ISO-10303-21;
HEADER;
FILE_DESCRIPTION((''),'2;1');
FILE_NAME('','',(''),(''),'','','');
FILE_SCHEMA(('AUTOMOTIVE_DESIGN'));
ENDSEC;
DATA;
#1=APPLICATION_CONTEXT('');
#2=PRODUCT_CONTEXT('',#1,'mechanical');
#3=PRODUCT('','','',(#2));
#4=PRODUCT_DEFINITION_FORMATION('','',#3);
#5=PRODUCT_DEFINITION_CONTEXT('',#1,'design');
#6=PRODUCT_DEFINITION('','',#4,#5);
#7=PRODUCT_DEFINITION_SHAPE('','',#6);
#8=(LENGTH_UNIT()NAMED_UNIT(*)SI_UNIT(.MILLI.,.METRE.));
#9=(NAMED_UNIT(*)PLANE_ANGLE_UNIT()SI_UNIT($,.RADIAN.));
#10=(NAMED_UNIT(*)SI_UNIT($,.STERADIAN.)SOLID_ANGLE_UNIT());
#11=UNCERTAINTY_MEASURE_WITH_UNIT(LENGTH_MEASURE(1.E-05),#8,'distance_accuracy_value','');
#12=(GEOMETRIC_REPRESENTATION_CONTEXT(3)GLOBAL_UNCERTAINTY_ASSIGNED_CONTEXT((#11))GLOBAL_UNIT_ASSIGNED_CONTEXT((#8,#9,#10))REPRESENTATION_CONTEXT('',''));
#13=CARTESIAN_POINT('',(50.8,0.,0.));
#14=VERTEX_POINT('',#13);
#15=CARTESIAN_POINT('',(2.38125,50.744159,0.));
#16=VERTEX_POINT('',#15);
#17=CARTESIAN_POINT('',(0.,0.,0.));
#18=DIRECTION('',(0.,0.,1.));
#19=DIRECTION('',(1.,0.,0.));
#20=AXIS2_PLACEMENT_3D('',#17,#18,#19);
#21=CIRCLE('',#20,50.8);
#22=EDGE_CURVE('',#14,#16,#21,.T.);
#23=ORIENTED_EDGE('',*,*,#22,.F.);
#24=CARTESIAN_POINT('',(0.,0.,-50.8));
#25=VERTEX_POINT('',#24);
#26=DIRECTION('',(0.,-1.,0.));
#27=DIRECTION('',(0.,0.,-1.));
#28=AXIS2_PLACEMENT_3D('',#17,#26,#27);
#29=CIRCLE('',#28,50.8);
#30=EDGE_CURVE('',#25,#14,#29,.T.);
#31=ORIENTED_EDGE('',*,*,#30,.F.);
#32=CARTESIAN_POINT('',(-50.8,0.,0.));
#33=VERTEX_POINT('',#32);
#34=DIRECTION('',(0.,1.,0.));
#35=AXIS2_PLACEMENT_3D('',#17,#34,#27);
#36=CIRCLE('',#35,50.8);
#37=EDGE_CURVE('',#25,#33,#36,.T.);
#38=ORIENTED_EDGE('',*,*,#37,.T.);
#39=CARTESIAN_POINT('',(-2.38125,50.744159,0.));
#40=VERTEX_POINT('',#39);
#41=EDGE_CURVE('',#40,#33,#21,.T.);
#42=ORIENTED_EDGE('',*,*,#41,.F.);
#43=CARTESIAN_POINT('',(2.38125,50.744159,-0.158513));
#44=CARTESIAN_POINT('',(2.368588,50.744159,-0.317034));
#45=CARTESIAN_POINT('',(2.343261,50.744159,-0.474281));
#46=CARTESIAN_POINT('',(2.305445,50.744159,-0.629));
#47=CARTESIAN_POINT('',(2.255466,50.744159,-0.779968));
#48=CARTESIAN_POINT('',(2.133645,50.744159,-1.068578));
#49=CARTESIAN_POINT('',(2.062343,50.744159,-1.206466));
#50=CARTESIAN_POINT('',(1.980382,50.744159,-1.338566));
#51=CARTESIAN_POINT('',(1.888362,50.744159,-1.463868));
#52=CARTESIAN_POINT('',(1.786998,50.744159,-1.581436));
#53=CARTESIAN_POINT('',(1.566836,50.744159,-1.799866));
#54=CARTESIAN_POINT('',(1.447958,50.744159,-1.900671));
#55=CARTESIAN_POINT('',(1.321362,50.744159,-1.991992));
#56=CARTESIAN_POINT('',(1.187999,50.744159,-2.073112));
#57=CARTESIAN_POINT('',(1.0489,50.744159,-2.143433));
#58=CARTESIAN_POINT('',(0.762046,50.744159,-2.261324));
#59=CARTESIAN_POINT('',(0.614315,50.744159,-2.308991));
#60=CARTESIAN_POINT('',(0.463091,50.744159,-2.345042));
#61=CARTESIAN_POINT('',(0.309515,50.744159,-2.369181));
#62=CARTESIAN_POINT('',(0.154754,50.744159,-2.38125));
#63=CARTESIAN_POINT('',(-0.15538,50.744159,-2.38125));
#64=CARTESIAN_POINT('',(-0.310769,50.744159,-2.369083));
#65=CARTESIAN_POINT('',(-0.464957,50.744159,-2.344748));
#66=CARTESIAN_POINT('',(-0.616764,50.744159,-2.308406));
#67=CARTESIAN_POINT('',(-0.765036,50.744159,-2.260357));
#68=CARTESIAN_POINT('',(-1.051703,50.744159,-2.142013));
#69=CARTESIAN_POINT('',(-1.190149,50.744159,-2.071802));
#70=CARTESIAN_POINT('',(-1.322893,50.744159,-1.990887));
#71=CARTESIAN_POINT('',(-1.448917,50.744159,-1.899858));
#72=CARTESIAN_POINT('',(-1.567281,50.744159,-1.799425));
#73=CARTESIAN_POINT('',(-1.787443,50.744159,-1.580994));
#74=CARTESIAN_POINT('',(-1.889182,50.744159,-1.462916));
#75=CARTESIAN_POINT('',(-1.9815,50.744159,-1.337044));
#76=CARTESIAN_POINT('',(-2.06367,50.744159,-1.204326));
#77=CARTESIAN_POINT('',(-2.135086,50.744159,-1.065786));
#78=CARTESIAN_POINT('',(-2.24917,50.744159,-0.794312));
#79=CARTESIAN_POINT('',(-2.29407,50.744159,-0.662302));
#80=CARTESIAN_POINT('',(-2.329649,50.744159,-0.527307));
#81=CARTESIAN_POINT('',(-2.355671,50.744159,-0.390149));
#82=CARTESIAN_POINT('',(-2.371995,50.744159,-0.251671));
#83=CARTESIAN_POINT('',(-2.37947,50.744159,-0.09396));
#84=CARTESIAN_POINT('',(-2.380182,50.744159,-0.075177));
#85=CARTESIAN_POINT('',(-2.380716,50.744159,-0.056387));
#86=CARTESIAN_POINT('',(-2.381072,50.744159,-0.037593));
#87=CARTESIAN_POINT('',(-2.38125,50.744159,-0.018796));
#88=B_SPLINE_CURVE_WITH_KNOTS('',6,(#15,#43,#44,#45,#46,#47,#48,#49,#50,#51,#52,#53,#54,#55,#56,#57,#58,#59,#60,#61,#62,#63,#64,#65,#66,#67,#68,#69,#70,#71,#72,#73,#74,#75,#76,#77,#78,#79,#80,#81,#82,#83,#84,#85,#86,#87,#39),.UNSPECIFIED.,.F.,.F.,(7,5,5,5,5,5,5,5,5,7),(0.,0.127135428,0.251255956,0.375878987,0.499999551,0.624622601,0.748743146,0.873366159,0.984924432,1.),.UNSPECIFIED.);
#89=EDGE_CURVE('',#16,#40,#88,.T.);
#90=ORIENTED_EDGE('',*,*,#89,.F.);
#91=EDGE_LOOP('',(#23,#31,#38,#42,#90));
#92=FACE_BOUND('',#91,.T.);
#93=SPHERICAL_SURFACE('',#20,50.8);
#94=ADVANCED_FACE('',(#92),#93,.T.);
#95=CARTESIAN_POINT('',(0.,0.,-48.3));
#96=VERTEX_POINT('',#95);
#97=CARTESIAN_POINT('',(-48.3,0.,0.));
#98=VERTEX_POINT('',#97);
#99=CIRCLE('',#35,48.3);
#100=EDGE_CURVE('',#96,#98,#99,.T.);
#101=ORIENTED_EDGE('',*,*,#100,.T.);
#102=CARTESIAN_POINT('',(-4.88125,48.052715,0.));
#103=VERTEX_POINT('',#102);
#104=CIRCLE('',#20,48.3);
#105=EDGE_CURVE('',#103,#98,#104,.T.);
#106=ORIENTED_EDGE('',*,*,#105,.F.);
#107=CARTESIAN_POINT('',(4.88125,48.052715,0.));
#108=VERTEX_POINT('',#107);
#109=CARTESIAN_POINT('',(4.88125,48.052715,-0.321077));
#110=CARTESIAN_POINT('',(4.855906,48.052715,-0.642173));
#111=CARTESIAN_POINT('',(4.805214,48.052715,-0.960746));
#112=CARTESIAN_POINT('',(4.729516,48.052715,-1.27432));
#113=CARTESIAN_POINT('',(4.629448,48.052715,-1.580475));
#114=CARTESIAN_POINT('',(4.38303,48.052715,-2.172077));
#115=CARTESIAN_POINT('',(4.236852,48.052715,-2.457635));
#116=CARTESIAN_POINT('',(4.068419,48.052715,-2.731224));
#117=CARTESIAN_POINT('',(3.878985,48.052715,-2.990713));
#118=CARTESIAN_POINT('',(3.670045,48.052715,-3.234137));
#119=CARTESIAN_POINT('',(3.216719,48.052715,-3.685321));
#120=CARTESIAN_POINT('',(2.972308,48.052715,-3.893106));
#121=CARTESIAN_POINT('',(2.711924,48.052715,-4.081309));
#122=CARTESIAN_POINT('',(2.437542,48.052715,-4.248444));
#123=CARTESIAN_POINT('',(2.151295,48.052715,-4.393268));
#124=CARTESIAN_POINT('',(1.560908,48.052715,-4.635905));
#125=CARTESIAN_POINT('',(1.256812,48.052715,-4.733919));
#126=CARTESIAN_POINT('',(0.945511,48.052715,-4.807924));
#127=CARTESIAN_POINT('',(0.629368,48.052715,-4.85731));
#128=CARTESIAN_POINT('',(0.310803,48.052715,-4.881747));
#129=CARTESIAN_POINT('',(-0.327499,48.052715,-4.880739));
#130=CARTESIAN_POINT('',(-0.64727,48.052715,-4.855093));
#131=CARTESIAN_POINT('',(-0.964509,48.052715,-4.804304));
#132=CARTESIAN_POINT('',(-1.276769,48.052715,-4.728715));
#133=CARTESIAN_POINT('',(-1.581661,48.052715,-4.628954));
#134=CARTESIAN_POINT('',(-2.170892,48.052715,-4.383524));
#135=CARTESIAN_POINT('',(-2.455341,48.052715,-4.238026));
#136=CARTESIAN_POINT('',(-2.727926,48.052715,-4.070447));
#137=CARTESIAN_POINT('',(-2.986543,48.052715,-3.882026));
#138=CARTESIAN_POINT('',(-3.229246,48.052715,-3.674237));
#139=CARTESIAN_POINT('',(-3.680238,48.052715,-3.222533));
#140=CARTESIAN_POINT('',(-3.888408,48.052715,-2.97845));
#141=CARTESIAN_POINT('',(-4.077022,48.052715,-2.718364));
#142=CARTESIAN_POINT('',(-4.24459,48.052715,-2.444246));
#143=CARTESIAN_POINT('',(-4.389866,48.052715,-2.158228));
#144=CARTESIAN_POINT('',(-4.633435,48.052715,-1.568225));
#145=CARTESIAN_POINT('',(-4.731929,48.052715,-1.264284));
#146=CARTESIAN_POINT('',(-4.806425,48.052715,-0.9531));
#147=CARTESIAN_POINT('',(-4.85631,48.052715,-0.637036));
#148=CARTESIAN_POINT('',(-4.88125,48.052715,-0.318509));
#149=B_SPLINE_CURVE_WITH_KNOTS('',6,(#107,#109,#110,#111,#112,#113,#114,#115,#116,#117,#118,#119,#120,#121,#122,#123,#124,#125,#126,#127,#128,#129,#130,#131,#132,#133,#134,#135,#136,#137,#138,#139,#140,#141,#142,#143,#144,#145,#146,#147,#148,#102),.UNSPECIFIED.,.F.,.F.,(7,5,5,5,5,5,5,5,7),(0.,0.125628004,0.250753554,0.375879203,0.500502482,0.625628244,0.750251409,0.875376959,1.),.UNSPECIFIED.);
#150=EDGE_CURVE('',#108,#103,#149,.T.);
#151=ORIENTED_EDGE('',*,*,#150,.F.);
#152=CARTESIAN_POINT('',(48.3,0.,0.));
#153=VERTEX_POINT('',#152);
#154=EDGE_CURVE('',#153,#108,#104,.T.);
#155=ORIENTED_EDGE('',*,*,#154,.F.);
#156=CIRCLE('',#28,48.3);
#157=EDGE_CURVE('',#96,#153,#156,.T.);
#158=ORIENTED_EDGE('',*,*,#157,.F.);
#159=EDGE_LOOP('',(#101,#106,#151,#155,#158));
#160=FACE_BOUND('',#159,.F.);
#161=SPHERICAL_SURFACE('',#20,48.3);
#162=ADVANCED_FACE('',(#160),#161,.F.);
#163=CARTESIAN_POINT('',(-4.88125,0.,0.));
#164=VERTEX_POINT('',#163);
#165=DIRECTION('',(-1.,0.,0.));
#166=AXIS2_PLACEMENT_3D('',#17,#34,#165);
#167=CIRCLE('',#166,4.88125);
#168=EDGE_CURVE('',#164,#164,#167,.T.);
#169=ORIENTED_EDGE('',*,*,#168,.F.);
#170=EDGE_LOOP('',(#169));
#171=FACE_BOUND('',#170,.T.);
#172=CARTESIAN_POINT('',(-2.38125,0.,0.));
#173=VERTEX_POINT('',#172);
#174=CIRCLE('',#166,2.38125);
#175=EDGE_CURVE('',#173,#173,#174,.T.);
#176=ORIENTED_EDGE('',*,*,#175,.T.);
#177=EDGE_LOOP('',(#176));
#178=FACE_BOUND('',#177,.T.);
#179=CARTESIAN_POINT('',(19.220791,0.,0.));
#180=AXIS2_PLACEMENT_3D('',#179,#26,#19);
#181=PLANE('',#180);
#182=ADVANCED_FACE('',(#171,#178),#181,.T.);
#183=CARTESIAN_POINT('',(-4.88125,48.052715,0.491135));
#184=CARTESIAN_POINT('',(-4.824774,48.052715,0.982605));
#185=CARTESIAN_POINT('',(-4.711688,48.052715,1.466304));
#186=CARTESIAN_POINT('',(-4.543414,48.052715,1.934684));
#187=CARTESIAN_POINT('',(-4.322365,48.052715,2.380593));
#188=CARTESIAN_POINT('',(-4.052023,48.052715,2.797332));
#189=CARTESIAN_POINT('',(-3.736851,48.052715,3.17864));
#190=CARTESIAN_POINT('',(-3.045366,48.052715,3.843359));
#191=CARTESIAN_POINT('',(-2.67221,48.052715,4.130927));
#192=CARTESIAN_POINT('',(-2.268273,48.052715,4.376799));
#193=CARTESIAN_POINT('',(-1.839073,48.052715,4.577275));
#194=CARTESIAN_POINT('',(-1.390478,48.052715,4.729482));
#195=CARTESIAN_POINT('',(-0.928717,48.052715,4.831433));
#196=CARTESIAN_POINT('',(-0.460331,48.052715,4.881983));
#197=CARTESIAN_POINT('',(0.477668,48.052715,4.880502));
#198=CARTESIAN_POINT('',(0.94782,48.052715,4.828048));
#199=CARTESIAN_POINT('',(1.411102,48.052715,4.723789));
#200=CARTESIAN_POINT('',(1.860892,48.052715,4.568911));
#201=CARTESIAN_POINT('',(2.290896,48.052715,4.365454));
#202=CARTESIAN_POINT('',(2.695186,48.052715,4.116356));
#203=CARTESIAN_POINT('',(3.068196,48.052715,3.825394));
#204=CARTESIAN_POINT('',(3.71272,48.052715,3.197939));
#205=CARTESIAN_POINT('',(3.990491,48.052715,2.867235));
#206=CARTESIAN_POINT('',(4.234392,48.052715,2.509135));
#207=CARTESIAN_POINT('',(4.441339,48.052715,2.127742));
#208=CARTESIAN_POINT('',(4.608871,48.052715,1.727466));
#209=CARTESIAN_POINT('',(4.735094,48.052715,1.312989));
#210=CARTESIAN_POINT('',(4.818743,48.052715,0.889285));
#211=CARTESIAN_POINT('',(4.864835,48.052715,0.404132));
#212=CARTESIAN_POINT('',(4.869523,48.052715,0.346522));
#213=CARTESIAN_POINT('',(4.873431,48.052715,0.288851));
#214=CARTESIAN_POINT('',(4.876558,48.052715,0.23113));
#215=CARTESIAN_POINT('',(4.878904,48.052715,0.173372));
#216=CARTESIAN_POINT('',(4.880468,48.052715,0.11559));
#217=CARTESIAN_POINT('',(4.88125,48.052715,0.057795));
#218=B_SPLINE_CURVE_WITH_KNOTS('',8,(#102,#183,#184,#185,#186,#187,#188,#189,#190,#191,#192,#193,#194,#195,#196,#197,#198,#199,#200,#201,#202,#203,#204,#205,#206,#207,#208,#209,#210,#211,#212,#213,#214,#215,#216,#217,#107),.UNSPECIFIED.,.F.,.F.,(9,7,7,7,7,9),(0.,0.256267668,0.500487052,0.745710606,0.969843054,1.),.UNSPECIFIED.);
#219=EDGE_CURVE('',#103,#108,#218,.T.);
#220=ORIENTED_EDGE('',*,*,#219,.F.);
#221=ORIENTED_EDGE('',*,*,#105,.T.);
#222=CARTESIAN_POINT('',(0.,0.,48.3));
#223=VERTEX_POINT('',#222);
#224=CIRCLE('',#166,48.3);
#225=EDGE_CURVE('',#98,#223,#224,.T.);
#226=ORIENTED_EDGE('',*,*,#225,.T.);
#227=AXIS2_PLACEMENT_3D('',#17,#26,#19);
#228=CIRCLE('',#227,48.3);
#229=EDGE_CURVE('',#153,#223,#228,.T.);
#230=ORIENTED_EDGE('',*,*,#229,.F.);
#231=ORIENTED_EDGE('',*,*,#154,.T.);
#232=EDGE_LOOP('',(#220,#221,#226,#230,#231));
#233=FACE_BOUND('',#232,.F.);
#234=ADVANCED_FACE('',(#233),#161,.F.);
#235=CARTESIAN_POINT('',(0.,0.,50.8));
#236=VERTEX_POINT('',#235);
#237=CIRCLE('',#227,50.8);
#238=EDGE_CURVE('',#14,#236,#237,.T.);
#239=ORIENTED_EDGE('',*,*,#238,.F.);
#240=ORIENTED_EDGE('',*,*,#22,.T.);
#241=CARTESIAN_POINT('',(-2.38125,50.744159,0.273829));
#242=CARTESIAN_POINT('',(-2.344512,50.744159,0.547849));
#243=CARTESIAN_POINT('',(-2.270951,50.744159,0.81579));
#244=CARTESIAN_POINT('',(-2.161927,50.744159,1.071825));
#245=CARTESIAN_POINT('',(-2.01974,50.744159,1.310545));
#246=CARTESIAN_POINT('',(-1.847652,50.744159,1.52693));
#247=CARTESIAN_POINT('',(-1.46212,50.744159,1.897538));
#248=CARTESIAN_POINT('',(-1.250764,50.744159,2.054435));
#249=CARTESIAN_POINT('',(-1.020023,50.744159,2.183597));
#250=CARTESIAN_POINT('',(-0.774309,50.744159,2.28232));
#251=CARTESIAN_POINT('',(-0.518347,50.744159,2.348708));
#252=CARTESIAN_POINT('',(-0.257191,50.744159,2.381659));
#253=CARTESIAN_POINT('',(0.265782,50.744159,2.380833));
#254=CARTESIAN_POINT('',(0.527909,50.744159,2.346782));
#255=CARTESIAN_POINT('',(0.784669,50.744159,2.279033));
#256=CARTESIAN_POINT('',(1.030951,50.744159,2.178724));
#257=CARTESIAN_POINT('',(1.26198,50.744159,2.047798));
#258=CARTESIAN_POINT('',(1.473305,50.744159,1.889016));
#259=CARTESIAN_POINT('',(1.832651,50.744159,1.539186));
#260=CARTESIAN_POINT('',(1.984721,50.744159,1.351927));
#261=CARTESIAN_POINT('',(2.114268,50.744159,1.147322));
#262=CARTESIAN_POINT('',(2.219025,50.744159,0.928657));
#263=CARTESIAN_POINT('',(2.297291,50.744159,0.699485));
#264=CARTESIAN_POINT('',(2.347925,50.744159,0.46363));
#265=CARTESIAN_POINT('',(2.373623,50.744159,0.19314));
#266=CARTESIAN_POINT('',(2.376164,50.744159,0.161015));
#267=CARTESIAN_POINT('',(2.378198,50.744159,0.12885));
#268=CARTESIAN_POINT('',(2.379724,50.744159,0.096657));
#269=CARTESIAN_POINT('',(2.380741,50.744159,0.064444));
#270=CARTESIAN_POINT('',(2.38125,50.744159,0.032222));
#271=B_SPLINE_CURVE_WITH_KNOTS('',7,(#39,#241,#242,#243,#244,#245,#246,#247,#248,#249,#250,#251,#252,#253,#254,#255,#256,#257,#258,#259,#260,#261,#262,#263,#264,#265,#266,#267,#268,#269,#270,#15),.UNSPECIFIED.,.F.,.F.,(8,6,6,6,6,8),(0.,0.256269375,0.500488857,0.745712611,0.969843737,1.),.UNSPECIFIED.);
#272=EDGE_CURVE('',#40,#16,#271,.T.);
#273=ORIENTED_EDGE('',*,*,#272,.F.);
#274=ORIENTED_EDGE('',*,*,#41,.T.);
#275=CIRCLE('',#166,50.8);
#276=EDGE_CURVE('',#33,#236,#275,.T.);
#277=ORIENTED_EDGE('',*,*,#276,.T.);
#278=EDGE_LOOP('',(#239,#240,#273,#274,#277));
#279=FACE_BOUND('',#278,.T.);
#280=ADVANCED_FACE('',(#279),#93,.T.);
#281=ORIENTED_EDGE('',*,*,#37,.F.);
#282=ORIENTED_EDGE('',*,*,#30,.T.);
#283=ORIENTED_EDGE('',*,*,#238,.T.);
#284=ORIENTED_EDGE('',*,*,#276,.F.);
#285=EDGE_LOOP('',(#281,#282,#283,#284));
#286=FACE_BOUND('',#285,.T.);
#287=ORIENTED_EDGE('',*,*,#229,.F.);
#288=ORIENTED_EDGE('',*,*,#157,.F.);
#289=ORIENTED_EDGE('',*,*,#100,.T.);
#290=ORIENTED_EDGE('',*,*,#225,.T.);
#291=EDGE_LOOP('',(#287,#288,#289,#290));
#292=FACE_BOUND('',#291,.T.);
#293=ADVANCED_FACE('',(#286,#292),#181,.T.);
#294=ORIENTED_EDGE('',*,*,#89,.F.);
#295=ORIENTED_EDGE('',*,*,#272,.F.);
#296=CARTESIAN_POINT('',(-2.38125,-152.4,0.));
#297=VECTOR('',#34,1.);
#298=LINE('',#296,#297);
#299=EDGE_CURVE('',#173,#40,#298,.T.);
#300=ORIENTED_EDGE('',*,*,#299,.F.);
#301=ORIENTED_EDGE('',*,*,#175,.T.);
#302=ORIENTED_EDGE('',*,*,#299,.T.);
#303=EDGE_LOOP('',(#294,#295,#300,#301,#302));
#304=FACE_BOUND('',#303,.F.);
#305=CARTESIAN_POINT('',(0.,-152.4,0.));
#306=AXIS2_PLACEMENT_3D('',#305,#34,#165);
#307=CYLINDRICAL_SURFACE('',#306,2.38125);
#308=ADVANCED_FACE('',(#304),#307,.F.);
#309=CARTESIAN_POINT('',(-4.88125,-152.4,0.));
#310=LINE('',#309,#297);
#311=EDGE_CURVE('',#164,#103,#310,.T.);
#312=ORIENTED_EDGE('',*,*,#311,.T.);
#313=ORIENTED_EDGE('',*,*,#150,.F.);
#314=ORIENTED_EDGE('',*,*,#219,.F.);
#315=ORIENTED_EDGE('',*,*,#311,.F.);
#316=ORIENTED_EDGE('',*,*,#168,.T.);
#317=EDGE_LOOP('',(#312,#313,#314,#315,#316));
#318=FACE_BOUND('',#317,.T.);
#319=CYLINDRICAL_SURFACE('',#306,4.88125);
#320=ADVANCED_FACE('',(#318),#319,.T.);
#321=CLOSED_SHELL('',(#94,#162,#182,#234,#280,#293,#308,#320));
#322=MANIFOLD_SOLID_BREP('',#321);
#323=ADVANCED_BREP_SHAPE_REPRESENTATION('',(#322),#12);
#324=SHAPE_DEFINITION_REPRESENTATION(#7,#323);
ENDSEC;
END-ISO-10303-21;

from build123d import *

# Parameters (mm, degrees)
F1_ANGLE = 180
F2_D     = 4.7625
F4_T     = -2.5


# Not quite as in the source:
# - a feature of the source that left no trace in its solid (it failed there, or was rolled back) is left out


with BuildPart() as f1:
    # F0 (on Front) → F1 (revolve)
    with BuildSketch(Plane.XZ):
        with BuildLine():
            ThreePointArc((0, -50.8), (35.9210244843, -35.9210244843), (50.8, 0))
            ThreePointArc((50.8, 0), (35.9210244843, 35.9210244843), (0, 50.8))
            Line((0, 50.8), (0, 0))
            Line((0, 0), (0, -50.8))
        make_face()
    revolve(axis=Axis((0, 0, 25.4), (0, 0, 1)), revolution_arc=F1_ANGLE)

    # F2 (through all)
    with Locations(Plane.XZ):
        with Locations((0, 0)):
            Hole(F2_D / 2)

    # F4
    f4_openings = [f1.faces().sort_by_distance(p)[0] for p in [
        (49.363159, 0, 0),
    ]]
    offset(amount=F4_T, openings=f4_openings)


solid = f1.part
